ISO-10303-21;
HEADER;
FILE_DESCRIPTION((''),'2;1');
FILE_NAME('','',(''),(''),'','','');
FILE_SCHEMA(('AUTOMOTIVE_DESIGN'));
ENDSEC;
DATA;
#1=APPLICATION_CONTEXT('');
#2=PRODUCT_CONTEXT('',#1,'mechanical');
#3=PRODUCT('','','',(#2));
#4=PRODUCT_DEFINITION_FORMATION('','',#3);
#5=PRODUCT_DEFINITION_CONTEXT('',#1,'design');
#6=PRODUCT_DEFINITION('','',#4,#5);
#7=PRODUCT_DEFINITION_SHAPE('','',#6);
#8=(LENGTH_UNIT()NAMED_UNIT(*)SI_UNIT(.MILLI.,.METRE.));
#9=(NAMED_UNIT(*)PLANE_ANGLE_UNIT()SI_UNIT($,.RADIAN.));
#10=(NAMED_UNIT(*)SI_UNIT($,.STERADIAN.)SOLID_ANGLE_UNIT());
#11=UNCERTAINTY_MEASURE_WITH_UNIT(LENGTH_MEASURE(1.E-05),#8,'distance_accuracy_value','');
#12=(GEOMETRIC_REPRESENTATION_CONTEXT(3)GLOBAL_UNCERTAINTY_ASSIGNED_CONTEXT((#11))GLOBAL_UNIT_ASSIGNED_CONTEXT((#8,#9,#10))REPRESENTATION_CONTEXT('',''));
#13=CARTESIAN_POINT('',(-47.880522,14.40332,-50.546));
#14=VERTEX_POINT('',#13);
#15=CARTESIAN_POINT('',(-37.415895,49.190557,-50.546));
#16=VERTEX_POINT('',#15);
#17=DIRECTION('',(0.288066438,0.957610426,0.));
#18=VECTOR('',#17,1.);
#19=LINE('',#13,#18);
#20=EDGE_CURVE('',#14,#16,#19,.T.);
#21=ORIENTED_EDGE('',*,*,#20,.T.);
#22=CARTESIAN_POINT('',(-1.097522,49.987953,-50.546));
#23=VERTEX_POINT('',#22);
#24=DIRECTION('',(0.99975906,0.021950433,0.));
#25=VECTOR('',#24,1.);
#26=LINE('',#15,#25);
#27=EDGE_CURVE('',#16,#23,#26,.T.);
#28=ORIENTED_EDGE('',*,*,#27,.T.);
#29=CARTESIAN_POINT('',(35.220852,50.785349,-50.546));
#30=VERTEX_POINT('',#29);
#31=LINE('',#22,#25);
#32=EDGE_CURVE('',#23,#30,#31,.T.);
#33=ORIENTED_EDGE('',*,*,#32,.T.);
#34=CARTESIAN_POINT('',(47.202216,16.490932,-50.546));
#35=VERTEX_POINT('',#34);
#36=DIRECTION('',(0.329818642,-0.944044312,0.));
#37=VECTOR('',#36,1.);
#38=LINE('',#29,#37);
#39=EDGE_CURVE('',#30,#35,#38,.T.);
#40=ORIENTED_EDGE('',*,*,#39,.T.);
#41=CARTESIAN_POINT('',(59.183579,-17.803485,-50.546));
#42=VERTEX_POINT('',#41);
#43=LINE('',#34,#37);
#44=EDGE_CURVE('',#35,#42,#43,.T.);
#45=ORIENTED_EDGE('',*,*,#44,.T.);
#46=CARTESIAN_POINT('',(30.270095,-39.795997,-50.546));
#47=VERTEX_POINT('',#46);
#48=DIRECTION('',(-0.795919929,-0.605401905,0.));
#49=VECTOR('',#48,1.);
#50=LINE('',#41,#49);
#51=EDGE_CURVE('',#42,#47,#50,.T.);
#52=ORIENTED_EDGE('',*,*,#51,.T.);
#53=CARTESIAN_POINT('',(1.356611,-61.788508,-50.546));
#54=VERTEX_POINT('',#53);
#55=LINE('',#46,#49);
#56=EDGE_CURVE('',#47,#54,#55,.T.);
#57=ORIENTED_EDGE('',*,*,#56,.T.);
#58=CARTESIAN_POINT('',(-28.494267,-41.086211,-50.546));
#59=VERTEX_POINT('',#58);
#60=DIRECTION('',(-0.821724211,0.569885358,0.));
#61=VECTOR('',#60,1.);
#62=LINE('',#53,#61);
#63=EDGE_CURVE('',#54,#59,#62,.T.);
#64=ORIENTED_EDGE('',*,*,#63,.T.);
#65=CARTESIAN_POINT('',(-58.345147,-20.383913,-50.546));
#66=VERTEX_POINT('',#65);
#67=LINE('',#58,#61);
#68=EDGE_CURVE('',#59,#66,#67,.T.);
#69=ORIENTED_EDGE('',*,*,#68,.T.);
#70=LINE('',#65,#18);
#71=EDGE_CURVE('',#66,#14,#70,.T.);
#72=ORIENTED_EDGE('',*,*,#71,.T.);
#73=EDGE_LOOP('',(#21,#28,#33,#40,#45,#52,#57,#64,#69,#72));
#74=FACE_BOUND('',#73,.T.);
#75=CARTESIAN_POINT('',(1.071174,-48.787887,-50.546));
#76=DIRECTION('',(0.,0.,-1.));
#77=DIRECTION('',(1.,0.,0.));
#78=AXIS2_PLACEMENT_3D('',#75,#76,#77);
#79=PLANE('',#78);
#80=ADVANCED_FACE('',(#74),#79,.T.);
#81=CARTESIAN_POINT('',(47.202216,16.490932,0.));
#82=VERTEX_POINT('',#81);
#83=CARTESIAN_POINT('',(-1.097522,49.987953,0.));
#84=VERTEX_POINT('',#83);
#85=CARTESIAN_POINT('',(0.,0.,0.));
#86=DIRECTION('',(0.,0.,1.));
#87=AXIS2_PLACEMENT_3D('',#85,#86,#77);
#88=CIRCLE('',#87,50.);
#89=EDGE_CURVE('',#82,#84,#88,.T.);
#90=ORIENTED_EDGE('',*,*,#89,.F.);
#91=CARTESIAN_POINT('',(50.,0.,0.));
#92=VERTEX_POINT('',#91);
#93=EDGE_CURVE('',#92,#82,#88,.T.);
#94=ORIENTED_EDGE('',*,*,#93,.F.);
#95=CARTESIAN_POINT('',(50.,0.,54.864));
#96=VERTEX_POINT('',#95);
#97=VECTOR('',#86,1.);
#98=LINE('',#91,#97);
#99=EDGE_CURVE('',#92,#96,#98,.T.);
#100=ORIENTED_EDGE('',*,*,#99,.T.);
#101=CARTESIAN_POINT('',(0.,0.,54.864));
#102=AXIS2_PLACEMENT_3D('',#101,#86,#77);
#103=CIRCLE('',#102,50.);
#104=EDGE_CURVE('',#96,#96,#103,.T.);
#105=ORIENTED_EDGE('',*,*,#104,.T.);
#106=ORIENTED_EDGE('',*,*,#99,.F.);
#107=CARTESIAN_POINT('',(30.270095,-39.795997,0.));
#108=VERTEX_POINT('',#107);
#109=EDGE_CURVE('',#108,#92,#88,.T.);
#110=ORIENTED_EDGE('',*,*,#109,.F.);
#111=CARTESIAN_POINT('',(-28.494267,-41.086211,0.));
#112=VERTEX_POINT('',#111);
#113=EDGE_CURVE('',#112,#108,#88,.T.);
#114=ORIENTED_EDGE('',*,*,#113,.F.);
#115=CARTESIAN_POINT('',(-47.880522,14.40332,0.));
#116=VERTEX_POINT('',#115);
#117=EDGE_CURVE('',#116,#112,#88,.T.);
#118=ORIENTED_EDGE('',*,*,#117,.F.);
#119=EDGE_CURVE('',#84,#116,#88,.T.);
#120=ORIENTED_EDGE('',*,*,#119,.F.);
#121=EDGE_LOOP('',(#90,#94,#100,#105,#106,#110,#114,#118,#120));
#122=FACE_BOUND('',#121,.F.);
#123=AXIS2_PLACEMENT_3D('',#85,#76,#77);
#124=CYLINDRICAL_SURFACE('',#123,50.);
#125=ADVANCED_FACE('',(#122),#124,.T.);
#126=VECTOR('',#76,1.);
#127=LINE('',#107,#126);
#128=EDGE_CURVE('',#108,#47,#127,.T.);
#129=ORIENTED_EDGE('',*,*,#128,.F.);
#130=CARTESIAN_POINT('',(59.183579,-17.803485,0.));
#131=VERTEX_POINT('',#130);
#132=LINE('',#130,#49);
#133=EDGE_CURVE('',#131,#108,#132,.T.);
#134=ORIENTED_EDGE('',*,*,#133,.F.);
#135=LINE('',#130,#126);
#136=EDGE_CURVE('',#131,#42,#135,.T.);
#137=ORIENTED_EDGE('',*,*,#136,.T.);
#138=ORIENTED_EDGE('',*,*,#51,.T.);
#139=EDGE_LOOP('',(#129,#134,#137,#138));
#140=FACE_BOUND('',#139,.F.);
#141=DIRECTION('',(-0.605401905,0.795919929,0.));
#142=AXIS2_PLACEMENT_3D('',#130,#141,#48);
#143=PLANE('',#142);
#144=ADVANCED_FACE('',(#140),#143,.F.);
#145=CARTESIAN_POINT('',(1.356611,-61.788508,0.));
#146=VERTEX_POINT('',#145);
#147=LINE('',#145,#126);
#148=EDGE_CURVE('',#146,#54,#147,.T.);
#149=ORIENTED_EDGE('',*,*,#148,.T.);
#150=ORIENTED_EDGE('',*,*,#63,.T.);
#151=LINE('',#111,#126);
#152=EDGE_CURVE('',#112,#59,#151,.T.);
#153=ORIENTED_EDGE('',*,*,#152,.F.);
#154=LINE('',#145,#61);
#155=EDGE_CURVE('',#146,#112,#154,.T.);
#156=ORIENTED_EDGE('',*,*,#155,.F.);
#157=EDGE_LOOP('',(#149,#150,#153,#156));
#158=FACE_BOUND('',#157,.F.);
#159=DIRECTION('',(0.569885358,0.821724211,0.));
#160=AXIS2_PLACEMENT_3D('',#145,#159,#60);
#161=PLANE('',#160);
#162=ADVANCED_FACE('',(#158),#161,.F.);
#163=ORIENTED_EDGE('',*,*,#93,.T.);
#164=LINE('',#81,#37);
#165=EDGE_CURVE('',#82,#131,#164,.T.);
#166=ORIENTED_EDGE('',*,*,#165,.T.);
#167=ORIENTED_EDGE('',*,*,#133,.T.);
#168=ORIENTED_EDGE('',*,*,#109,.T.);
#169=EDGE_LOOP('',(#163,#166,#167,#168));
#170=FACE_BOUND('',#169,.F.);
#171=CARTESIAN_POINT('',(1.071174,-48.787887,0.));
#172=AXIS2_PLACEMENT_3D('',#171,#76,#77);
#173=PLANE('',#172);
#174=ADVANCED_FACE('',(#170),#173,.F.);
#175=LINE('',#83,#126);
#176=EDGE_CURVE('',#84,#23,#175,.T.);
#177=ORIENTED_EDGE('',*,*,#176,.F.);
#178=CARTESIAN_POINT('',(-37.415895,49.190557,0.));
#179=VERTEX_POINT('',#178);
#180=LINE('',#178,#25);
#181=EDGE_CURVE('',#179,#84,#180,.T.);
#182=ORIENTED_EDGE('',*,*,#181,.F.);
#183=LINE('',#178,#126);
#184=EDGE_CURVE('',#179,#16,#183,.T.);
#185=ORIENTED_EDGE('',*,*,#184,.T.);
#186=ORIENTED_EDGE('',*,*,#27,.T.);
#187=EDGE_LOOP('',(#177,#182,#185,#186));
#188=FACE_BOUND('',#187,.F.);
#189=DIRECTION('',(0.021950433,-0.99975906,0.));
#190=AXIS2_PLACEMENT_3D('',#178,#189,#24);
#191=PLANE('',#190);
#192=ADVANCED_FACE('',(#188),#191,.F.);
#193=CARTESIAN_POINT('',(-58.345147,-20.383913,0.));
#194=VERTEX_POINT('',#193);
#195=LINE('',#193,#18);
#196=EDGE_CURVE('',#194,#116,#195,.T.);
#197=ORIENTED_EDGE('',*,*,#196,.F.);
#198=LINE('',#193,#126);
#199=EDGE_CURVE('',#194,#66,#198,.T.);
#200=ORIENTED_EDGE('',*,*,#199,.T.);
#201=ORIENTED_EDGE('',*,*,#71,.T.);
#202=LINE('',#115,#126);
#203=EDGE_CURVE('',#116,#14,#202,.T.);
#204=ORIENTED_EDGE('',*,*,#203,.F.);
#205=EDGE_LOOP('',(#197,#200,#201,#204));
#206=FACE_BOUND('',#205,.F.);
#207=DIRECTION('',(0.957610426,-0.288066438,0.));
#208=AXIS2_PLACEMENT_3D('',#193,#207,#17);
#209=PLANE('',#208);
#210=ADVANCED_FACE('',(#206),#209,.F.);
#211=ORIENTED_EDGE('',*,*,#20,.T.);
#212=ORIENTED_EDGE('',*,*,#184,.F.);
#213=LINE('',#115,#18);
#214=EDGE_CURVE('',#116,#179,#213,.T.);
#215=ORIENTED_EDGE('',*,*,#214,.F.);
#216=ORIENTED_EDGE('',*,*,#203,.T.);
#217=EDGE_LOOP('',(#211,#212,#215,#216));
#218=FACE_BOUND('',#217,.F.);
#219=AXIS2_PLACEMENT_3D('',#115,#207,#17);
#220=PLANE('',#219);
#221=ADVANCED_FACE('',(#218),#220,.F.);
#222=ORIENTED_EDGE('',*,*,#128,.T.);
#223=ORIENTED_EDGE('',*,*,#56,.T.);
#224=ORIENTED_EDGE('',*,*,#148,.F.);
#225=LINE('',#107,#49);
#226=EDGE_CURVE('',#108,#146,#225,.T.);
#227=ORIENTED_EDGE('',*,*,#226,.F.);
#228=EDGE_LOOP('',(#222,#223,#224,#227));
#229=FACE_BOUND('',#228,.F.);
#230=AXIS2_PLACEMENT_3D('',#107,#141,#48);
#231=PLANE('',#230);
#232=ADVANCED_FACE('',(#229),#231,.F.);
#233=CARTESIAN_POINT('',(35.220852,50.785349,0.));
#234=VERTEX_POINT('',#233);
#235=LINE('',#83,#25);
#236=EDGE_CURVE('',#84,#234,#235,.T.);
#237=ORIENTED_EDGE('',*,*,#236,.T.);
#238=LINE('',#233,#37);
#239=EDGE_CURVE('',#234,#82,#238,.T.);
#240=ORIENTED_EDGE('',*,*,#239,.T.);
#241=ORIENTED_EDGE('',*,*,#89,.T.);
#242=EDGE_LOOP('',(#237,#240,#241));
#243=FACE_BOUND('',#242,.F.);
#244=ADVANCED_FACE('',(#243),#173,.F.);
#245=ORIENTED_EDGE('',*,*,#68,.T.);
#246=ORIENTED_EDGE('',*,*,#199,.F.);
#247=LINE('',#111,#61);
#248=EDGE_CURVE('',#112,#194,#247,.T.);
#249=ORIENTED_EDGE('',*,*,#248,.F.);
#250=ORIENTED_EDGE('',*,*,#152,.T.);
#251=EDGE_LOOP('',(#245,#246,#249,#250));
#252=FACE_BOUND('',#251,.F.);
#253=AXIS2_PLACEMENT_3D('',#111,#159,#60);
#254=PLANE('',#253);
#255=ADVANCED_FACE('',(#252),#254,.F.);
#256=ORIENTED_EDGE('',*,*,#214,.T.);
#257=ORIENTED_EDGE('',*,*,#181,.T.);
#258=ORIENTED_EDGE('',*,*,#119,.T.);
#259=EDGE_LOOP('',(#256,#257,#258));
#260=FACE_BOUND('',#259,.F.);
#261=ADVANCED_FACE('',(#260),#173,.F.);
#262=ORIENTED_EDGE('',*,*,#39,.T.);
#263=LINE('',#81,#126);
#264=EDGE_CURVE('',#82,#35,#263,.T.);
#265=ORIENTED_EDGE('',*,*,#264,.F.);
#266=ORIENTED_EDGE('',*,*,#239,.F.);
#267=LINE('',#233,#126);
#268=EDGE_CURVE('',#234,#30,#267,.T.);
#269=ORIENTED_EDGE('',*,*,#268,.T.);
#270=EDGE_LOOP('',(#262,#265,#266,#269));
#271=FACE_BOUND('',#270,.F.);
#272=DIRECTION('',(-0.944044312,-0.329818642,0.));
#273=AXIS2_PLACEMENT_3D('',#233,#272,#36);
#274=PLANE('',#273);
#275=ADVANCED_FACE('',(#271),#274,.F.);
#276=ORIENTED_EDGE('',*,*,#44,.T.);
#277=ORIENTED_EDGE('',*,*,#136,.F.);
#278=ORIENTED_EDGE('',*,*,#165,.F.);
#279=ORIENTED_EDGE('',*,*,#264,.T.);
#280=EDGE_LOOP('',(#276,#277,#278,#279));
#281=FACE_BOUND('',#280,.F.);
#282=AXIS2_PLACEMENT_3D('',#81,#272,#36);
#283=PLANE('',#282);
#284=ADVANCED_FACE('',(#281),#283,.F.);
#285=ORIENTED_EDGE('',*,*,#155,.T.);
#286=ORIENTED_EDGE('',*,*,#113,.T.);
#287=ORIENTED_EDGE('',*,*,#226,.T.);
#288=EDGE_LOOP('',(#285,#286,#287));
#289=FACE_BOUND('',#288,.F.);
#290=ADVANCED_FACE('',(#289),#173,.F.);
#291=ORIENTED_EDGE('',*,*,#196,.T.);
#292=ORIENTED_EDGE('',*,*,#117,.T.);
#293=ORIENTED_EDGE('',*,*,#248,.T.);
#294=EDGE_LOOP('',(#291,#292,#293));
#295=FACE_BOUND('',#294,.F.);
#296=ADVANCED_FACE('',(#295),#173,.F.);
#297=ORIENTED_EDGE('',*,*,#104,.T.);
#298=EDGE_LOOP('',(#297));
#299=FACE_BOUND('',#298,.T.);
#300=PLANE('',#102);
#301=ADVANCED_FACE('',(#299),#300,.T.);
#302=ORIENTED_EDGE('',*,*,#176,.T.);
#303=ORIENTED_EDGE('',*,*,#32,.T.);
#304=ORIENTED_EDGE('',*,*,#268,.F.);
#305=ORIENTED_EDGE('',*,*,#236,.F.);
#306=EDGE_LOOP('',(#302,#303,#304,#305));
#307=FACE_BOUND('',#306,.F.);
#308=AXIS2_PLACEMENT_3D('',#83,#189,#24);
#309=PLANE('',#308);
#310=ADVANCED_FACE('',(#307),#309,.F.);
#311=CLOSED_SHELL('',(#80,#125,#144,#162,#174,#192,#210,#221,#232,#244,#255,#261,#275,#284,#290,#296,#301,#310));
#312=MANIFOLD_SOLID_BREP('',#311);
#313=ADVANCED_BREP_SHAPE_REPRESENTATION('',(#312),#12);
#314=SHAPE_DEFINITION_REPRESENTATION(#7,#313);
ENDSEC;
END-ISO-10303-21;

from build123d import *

# Parameters (mm, degrees)
F0_R     = 50
F1_DEPTH = 54.864
F3_DEPTH = 50.546


with BuildPart() as f1:
    # F0 (on Top) → F1 (new body)
    with BuildSketch(Plane.XY):
        Circle(F0_R)
    extrude(amount=F1_DEPTH)

    # F2 (on face) → F3 (join)
    with BuildSketch(Plane(origin=(0, 0, 0), x_dir=(1, 0, 0), z_dir=(0, 0, -1))):
        with BuildLine():
            Line((30.2700951576, 39.7959965216), (1.3566113452, 61.7885079781))
            Line((1.3566113452, 61.7885079781), (-28.494267061, 41.0862111256))
            ThreePointArc((-28.494267061, 41.0862111256), (1.0975221129, 49.9879530008), (30.2700951576, 39.7959965216))
        make_face()
        with BuildLine():
            Line((59.1835791051, 17.8034849624), (30.2700951576, 39.7959965216))
            ThreePointArc((30.2700951576, 39.7959965216), (44.7967898285, 22.209178757), (50, 0))
            ThreePointArc((50, 0), (49.2955920393, -8.3632891551), (47.2022157803, -16.4909316118))
            Line((47.2022157803, -16.4909316118), (59.1835791051, 17.8034849624))
        make_face()
        with BuildLine():
            ThreePointArc((50, 0), (44.7967898285, 22.209178757), (30.2700951576, 39.7959965216))
            ThreePointArc((30.2700951576, 39.7959965216), (1.0975221129, 49.9879530008), (-28.494267061, 41.0862111256))
            ThreePointArc((-28.494267061, 41.0862111256), (-47.2022150962, 16.49093357), (-47.8805218829, -14.4033199027))
            ThreePointArc((-47.8805218829, -14.4033199027), (-30.2700960741, -39.7959958245), (-1.097521687, -49.9879530102))
            ThreePointArc((-1.097521687, -49.9879530102), (28.4942681078, -41.0862103996), (47.2022157803, -16.4909316118))
            ThreePointArc((47.2022157803, -16.4909316118), (49.2955920393, -8.3632891551), (50, 0))
        make_face()
        with BuildLine():
            ThreePointArc((-47.8805218829, -14.4033199027), (-47.2022150962, 16.49093357), (-28.494267061, 41.0862111256))
            Line((-28.494267061, 41.0862111256), (-58.3451471843, 20.3839130822))
            Line((-58.3451471843, 20.3839130822), (-47.8805218829, -14.4033199027))
        make_face()
        with BuildLine():
            ThreePointArc((-1.097521687, -49.9879530102), (-30.2700960741, -39.7959958245), (-47.8805218829, -14.4033199027))
            Line((-47.8805218829, -14.4033199027), (-37.4158953837, -49.1905568696))
            Line((-37.4158953837, -49.1905568696), (-1.097521687, -49.9879530102))
        make_face()
        with BuildLine():
            Line((35.2208521177, -50.7853491531), (47.2022157803, -16.4909316118))
            ThreePointArc((47.2022157803, -16.4909316118), (28.4942681078, -41.0862103996), (-1.097521687, -49.9879530102))
            Line((-1.097521687, -49.9879530102), (35.2208521177, -50.7853491531))
        make_face()
    extrude(amount=F3_DEPTH)


solid = f1.part
